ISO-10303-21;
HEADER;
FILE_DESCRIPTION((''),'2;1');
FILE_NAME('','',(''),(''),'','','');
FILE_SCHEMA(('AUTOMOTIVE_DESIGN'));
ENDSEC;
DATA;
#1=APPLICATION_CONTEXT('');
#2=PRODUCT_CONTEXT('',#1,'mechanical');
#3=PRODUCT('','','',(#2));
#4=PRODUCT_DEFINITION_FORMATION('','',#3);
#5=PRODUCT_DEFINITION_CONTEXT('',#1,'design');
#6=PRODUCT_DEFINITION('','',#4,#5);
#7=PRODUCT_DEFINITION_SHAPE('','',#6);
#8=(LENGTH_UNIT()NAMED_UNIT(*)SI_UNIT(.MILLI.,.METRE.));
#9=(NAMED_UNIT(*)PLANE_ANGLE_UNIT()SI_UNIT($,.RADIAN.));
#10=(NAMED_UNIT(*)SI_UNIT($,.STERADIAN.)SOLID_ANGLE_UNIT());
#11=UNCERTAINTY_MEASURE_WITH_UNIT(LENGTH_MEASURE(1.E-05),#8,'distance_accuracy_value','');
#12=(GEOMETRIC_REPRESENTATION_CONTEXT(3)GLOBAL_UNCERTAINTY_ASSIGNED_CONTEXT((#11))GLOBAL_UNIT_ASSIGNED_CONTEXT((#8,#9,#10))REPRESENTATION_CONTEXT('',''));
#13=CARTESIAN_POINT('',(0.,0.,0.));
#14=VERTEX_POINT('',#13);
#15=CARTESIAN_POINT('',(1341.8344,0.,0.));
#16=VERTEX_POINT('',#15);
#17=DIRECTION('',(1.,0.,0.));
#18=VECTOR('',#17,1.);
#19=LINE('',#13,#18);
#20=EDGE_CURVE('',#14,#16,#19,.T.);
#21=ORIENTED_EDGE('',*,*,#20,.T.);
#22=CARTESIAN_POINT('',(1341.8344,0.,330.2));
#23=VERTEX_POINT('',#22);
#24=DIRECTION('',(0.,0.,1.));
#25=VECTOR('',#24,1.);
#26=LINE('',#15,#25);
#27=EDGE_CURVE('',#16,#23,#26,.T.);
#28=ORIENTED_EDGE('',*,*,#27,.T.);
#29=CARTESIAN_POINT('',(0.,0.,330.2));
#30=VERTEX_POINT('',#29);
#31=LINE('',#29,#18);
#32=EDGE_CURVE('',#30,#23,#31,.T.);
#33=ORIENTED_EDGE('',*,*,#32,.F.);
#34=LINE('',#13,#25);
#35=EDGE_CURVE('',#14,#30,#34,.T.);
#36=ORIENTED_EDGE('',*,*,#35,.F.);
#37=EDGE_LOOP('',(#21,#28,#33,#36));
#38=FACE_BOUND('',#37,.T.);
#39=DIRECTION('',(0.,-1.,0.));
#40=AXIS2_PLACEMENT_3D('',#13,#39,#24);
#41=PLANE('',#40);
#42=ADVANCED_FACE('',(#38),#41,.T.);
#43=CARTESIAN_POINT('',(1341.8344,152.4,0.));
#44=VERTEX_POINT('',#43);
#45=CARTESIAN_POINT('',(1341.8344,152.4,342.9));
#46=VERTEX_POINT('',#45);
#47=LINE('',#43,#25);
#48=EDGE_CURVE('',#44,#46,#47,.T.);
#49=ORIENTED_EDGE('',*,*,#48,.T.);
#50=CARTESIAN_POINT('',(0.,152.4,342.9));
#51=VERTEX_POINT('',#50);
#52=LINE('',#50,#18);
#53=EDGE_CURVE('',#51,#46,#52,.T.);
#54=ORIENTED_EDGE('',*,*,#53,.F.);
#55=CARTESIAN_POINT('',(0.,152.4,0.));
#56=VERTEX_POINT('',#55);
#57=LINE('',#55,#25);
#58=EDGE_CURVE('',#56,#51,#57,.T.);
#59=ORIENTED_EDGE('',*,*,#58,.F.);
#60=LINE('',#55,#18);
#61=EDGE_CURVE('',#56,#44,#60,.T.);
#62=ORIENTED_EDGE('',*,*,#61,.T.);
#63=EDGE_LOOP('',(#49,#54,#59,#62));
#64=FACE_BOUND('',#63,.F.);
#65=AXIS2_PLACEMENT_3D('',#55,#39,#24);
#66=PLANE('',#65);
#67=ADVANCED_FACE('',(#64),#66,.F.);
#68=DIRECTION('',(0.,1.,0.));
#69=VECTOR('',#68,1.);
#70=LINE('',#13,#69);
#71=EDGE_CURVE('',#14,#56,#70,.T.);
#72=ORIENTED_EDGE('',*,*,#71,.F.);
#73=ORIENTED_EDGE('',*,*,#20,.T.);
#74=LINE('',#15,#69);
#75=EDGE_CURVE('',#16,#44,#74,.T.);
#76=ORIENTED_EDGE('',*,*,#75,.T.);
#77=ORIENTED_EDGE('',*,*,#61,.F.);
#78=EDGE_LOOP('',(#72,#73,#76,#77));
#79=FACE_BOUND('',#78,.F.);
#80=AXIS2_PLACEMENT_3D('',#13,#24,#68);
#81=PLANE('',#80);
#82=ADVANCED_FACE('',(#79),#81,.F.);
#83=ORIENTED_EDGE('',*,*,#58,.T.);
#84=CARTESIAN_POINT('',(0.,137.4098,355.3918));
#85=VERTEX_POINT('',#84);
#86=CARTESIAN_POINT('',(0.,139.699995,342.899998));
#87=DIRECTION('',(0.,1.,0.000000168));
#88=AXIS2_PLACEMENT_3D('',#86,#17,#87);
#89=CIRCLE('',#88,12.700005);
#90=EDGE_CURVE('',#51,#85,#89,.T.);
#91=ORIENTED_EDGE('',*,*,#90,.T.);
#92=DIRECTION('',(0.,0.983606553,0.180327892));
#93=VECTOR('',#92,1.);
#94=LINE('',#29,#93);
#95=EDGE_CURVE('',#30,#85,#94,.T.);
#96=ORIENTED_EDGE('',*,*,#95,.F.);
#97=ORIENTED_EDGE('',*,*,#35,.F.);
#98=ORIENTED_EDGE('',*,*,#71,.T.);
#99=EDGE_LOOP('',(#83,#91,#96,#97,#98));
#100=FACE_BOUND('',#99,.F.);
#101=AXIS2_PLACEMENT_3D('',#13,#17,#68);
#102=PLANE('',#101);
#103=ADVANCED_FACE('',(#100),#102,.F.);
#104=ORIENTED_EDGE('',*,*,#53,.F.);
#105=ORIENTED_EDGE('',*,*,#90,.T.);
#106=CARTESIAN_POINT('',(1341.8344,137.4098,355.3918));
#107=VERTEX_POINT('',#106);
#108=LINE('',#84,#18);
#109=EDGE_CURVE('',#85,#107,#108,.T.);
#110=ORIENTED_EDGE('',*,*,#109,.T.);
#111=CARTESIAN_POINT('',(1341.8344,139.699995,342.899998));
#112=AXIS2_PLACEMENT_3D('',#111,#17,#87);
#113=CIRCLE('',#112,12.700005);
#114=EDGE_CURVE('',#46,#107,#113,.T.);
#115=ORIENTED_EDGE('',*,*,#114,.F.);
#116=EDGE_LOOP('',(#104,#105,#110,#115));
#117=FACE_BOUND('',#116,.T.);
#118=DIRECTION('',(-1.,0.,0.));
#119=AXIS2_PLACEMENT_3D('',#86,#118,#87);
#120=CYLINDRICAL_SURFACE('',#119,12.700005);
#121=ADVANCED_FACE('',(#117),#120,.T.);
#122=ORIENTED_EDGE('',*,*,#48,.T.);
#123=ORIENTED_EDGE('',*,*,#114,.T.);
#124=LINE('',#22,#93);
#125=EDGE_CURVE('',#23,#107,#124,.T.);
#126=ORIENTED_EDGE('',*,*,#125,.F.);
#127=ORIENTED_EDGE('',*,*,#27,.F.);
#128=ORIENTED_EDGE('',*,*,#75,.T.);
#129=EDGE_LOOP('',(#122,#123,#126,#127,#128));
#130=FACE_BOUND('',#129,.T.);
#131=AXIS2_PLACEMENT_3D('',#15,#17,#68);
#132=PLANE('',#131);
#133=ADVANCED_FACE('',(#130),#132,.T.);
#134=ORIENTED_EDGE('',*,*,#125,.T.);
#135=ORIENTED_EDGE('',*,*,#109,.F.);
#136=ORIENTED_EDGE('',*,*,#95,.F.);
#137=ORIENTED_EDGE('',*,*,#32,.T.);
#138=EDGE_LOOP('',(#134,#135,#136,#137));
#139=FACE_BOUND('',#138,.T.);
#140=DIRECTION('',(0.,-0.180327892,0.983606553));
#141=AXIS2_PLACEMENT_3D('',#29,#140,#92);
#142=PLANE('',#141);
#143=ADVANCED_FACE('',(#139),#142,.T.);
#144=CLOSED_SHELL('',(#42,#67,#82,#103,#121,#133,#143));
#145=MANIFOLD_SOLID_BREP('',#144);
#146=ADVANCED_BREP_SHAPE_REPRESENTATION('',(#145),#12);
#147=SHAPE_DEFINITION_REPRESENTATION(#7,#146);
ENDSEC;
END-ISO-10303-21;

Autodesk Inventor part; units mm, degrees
ref_plane "YZ Plane" through (0, 0, 0) normal (1, 0, 0) x (0, 1, 0)
ref_plane "XZ Plane" through (0, 0, 0) normal (0, 1, 0) x (-1, 0, 0)
ref_plane "XY Plane" through (0, 0, 0) normal (0, 0, 1) x (1, 0, 0)
sketch "Profile" plane through (0, 0, 0) normal (0, 0, 1) x (1, 0, 0)
  line L0 (0, 0) -> (0, 330.2)
  line L1 (0, 0) -> (152.4, 0)
  line L2 (152.4, 0) -> (152.4, 342.9)
  line L3 (152.4, 342.9) -> (139.7, 342.9) construction
  line L4 (152.4, 342.9) -> (139.7, 342.9) construction
  arc A0 (152.4, 342.9) -> (137.4098, 355.3918) centre (139.7, 342.9) ccw
  line L5 (0, 330.2) -> (137.4098, 355.3918)
  dimension "d0" = 330.2
  dimension "d1" = 152.4
  dimension "d2" = 342.9
  dimension "d3" = 12.7
  dimension "d4" = 12.7
sketch "Sketch1" plane through (0, 0, 0) normal (1, 0, 0) x (0, 1, 0)
  line L0 (0, 0) -> (0, 330.2)
  line L1 (0, 0) -> (152.4, 0)
  line L2 (152.4, 0) -> (152.4, 342.9)
  line L3 (152.4, 342.9) -> (139.7, 342.9) construction
  line L4 (152.4, 342.9) -> (139.7, 342.9) construction
  arc A0 (152.4, 342.9) -> (137.4098, 355.3918) centre (139.7, 342.9) ccw
  line L5 (0, 330.2) -> (137.4098, 355.3918)
extrude "Extrusion1" add sketch "Sketch1" along normal blind 1341.8344
properties part number "B" material "Granite, Cut, Polished"
